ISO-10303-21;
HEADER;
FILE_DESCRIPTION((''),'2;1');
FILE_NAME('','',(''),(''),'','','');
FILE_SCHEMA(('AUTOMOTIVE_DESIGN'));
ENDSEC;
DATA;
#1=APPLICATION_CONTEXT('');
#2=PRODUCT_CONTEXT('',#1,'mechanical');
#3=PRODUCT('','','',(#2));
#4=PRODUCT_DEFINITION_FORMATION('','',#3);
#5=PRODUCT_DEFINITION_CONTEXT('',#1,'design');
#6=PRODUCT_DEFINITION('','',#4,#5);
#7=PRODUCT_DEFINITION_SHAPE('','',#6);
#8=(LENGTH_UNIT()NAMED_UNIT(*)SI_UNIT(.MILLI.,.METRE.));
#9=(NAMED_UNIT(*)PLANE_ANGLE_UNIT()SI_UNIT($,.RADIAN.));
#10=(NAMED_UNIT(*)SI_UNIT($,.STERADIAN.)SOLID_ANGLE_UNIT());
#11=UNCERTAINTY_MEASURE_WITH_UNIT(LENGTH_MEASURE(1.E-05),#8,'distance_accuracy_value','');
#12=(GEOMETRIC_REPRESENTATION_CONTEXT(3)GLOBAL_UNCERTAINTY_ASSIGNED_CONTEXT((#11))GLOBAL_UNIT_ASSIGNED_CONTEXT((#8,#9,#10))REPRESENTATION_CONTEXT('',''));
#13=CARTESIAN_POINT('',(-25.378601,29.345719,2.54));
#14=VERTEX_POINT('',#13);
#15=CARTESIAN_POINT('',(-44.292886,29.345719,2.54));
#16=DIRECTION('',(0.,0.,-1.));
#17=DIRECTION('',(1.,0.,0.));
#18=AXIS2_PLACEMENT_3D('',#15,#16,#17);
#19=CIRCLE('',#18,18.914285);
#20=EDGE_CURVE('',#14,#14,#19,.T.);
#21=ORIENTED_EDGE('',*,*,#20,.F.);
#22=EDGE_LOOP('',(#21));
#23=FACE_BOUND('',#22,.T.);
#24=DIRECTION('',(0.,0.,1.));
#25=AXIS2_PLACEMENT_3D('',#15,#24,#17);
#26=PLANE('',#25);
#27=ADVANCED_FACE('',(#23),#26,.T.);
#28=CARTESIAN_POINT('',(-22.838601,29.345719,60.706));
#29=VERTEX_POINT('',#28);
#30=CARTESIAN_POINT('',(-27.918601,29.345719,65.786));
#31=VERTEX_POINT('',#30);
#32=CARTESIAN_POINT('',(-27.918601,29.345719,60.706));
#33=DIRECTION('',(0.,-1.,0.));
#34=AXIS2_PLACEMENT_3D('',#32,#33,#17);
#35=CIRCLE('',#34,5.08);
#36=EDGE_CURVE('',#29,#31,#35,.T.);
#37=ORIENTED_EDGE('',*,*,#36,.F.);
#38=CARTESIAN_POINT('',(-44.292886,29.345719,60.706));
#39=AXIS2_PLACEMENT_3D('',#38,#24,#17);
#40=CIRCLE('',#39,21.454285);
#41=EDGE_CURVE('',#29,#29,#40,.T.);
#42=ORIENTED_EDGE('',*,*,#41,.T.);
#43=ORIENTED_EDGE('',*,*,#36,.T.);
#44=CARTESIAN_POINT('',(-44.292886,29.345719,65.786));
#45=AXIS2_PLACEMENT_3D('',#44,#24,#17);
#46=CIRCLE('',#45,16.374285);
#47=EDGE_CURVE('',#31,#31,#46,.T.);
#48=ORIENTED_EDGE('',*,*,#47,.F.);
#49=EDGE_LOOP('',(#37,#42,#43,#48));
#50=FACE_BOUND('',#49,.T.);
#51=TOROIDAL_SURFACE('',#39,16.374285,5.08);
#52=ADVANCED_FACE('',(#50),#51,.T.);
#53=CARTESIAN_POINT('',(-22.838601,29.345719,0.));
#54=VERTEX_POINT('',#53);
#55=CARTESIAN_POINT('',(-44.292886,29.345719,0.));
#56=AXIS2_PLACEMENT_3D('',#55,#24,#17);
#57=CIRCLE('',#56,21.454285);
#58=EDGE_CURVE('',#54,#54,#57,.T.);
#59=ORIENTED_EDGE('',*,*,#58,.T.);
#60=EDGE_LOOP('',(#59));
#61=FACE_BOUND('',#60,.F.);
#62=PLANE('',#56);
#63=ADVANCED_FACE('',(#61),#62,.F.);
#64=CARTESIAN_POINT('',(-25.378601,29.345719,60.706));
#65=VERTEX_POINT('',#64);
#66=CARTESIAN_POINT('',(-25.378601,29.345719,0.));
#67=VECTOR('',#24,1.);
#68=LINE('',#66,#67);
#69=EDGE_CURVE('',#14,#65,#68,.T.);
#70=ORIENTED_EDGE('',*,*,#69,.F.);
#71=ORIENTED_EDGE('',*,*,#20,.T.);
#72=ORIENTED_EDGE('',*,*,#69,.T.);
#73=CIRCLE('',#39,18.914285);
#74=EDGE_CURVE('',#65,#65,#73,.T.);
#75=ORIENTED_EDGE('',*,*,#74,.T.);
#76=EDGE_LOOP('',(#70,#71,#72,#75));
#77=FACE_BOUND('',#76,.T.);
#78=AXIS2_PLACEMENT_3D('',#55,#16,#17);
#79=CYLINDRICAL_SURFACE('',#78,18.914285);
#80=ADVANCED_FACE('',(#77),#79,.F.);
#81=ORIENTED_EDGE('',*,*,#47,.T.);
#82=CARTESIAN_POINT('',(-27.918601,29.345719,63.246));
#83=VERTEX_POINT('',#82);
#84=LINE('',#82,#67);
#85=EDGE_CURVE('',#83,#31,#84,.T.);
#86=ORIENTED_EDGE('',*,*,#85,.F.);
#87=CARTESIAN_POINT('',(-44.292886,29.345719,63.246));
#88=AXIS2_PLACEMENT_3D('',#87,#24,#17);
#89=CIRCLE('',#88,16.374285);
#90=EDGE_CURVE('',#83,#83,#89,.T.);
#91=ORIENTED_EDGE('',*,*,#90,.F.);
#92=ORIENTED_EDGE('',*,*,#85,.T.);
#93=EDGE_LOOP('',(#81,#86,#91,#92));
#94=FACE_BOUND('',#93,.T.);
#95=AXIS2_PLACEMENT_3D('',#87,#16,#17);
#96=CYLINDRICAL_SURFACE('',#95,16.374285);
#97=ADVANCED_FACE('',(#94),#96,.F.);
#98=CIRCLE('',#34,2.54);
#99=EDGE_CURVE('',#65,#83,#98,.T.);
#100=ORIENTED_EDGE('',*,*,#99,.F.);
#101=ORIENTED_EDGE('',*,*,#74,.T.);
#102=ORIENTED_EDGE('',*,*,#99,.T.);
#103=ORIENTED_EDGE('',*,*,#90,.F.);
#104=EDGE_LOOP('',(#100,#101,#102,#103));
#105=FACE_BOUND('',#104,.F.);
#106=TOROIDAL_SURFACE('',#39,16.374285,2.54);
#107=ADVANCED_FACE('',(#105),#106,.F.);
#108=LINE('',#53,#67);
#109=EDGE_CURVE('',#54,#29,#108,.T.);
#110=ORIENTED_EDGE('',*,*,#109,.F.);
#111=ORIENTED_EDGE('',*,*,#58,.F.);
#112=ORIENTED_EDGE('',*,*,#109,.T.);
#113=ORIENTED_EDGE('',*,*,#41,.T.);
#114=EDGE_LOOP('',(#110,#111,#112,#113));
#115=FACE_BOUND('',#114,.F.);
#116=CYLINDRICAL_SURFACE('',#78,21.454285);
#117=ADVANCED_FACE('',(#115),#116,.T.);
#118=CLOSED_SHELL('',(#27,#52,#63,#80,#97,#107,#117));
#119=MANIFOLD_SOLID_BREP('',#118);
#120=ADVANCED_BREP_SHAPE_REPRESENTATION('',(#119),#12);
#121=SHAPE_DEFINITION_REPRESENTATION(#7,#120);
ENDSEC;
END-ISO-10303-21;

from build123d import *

# Parameters (mm, degrees)
F0_R     = 21.4542850261
F1_DEPTH = 65.786
F2_R     = 5.08
F3_T     = -2.54


# Not quite as in the source:
# - a shell that OpenCascade refuses in one call is made with other operations: the cavity is built on its own and cut out


with BuildPart() as f1:
    # F0 (on Top) → F1 (new body)
    with BuildSketch(Plane.XY):
        with Locations((-44.2928858101, 29.3457191437)):
            Circle(F0_R)
    extrude(amount=F1_DEPTH)

    # F2
    f2_edges = [f1.edges().sort_by_distance(p)[0] for p in [
        (-65.747171, 29.345719, 65.786),
    ]]
    fillet(f2_edges, radius=F2_R)

    # F3: a shell. OpenCascade refuses it in one call, so the cavity is built on its own and cut out:
    # the body offset inwards by the wall thickness, plus a prism from it out through each open face.
    f3_core = offset(f1.part, amount=F3_T, mode=Mode.PRIVATE)
    f3_exits = [f3_core.faces().sort_by_distance(p)[0] for p in [
        (-44.292886, 29.345719, 63.246),
    ]]
    add(f3_core, mode=Mode.SUBTRACT)
    extrude(f3_exits, amount=-F3_T, mode=Mode.SUBTRACT)


solid = f1.part
